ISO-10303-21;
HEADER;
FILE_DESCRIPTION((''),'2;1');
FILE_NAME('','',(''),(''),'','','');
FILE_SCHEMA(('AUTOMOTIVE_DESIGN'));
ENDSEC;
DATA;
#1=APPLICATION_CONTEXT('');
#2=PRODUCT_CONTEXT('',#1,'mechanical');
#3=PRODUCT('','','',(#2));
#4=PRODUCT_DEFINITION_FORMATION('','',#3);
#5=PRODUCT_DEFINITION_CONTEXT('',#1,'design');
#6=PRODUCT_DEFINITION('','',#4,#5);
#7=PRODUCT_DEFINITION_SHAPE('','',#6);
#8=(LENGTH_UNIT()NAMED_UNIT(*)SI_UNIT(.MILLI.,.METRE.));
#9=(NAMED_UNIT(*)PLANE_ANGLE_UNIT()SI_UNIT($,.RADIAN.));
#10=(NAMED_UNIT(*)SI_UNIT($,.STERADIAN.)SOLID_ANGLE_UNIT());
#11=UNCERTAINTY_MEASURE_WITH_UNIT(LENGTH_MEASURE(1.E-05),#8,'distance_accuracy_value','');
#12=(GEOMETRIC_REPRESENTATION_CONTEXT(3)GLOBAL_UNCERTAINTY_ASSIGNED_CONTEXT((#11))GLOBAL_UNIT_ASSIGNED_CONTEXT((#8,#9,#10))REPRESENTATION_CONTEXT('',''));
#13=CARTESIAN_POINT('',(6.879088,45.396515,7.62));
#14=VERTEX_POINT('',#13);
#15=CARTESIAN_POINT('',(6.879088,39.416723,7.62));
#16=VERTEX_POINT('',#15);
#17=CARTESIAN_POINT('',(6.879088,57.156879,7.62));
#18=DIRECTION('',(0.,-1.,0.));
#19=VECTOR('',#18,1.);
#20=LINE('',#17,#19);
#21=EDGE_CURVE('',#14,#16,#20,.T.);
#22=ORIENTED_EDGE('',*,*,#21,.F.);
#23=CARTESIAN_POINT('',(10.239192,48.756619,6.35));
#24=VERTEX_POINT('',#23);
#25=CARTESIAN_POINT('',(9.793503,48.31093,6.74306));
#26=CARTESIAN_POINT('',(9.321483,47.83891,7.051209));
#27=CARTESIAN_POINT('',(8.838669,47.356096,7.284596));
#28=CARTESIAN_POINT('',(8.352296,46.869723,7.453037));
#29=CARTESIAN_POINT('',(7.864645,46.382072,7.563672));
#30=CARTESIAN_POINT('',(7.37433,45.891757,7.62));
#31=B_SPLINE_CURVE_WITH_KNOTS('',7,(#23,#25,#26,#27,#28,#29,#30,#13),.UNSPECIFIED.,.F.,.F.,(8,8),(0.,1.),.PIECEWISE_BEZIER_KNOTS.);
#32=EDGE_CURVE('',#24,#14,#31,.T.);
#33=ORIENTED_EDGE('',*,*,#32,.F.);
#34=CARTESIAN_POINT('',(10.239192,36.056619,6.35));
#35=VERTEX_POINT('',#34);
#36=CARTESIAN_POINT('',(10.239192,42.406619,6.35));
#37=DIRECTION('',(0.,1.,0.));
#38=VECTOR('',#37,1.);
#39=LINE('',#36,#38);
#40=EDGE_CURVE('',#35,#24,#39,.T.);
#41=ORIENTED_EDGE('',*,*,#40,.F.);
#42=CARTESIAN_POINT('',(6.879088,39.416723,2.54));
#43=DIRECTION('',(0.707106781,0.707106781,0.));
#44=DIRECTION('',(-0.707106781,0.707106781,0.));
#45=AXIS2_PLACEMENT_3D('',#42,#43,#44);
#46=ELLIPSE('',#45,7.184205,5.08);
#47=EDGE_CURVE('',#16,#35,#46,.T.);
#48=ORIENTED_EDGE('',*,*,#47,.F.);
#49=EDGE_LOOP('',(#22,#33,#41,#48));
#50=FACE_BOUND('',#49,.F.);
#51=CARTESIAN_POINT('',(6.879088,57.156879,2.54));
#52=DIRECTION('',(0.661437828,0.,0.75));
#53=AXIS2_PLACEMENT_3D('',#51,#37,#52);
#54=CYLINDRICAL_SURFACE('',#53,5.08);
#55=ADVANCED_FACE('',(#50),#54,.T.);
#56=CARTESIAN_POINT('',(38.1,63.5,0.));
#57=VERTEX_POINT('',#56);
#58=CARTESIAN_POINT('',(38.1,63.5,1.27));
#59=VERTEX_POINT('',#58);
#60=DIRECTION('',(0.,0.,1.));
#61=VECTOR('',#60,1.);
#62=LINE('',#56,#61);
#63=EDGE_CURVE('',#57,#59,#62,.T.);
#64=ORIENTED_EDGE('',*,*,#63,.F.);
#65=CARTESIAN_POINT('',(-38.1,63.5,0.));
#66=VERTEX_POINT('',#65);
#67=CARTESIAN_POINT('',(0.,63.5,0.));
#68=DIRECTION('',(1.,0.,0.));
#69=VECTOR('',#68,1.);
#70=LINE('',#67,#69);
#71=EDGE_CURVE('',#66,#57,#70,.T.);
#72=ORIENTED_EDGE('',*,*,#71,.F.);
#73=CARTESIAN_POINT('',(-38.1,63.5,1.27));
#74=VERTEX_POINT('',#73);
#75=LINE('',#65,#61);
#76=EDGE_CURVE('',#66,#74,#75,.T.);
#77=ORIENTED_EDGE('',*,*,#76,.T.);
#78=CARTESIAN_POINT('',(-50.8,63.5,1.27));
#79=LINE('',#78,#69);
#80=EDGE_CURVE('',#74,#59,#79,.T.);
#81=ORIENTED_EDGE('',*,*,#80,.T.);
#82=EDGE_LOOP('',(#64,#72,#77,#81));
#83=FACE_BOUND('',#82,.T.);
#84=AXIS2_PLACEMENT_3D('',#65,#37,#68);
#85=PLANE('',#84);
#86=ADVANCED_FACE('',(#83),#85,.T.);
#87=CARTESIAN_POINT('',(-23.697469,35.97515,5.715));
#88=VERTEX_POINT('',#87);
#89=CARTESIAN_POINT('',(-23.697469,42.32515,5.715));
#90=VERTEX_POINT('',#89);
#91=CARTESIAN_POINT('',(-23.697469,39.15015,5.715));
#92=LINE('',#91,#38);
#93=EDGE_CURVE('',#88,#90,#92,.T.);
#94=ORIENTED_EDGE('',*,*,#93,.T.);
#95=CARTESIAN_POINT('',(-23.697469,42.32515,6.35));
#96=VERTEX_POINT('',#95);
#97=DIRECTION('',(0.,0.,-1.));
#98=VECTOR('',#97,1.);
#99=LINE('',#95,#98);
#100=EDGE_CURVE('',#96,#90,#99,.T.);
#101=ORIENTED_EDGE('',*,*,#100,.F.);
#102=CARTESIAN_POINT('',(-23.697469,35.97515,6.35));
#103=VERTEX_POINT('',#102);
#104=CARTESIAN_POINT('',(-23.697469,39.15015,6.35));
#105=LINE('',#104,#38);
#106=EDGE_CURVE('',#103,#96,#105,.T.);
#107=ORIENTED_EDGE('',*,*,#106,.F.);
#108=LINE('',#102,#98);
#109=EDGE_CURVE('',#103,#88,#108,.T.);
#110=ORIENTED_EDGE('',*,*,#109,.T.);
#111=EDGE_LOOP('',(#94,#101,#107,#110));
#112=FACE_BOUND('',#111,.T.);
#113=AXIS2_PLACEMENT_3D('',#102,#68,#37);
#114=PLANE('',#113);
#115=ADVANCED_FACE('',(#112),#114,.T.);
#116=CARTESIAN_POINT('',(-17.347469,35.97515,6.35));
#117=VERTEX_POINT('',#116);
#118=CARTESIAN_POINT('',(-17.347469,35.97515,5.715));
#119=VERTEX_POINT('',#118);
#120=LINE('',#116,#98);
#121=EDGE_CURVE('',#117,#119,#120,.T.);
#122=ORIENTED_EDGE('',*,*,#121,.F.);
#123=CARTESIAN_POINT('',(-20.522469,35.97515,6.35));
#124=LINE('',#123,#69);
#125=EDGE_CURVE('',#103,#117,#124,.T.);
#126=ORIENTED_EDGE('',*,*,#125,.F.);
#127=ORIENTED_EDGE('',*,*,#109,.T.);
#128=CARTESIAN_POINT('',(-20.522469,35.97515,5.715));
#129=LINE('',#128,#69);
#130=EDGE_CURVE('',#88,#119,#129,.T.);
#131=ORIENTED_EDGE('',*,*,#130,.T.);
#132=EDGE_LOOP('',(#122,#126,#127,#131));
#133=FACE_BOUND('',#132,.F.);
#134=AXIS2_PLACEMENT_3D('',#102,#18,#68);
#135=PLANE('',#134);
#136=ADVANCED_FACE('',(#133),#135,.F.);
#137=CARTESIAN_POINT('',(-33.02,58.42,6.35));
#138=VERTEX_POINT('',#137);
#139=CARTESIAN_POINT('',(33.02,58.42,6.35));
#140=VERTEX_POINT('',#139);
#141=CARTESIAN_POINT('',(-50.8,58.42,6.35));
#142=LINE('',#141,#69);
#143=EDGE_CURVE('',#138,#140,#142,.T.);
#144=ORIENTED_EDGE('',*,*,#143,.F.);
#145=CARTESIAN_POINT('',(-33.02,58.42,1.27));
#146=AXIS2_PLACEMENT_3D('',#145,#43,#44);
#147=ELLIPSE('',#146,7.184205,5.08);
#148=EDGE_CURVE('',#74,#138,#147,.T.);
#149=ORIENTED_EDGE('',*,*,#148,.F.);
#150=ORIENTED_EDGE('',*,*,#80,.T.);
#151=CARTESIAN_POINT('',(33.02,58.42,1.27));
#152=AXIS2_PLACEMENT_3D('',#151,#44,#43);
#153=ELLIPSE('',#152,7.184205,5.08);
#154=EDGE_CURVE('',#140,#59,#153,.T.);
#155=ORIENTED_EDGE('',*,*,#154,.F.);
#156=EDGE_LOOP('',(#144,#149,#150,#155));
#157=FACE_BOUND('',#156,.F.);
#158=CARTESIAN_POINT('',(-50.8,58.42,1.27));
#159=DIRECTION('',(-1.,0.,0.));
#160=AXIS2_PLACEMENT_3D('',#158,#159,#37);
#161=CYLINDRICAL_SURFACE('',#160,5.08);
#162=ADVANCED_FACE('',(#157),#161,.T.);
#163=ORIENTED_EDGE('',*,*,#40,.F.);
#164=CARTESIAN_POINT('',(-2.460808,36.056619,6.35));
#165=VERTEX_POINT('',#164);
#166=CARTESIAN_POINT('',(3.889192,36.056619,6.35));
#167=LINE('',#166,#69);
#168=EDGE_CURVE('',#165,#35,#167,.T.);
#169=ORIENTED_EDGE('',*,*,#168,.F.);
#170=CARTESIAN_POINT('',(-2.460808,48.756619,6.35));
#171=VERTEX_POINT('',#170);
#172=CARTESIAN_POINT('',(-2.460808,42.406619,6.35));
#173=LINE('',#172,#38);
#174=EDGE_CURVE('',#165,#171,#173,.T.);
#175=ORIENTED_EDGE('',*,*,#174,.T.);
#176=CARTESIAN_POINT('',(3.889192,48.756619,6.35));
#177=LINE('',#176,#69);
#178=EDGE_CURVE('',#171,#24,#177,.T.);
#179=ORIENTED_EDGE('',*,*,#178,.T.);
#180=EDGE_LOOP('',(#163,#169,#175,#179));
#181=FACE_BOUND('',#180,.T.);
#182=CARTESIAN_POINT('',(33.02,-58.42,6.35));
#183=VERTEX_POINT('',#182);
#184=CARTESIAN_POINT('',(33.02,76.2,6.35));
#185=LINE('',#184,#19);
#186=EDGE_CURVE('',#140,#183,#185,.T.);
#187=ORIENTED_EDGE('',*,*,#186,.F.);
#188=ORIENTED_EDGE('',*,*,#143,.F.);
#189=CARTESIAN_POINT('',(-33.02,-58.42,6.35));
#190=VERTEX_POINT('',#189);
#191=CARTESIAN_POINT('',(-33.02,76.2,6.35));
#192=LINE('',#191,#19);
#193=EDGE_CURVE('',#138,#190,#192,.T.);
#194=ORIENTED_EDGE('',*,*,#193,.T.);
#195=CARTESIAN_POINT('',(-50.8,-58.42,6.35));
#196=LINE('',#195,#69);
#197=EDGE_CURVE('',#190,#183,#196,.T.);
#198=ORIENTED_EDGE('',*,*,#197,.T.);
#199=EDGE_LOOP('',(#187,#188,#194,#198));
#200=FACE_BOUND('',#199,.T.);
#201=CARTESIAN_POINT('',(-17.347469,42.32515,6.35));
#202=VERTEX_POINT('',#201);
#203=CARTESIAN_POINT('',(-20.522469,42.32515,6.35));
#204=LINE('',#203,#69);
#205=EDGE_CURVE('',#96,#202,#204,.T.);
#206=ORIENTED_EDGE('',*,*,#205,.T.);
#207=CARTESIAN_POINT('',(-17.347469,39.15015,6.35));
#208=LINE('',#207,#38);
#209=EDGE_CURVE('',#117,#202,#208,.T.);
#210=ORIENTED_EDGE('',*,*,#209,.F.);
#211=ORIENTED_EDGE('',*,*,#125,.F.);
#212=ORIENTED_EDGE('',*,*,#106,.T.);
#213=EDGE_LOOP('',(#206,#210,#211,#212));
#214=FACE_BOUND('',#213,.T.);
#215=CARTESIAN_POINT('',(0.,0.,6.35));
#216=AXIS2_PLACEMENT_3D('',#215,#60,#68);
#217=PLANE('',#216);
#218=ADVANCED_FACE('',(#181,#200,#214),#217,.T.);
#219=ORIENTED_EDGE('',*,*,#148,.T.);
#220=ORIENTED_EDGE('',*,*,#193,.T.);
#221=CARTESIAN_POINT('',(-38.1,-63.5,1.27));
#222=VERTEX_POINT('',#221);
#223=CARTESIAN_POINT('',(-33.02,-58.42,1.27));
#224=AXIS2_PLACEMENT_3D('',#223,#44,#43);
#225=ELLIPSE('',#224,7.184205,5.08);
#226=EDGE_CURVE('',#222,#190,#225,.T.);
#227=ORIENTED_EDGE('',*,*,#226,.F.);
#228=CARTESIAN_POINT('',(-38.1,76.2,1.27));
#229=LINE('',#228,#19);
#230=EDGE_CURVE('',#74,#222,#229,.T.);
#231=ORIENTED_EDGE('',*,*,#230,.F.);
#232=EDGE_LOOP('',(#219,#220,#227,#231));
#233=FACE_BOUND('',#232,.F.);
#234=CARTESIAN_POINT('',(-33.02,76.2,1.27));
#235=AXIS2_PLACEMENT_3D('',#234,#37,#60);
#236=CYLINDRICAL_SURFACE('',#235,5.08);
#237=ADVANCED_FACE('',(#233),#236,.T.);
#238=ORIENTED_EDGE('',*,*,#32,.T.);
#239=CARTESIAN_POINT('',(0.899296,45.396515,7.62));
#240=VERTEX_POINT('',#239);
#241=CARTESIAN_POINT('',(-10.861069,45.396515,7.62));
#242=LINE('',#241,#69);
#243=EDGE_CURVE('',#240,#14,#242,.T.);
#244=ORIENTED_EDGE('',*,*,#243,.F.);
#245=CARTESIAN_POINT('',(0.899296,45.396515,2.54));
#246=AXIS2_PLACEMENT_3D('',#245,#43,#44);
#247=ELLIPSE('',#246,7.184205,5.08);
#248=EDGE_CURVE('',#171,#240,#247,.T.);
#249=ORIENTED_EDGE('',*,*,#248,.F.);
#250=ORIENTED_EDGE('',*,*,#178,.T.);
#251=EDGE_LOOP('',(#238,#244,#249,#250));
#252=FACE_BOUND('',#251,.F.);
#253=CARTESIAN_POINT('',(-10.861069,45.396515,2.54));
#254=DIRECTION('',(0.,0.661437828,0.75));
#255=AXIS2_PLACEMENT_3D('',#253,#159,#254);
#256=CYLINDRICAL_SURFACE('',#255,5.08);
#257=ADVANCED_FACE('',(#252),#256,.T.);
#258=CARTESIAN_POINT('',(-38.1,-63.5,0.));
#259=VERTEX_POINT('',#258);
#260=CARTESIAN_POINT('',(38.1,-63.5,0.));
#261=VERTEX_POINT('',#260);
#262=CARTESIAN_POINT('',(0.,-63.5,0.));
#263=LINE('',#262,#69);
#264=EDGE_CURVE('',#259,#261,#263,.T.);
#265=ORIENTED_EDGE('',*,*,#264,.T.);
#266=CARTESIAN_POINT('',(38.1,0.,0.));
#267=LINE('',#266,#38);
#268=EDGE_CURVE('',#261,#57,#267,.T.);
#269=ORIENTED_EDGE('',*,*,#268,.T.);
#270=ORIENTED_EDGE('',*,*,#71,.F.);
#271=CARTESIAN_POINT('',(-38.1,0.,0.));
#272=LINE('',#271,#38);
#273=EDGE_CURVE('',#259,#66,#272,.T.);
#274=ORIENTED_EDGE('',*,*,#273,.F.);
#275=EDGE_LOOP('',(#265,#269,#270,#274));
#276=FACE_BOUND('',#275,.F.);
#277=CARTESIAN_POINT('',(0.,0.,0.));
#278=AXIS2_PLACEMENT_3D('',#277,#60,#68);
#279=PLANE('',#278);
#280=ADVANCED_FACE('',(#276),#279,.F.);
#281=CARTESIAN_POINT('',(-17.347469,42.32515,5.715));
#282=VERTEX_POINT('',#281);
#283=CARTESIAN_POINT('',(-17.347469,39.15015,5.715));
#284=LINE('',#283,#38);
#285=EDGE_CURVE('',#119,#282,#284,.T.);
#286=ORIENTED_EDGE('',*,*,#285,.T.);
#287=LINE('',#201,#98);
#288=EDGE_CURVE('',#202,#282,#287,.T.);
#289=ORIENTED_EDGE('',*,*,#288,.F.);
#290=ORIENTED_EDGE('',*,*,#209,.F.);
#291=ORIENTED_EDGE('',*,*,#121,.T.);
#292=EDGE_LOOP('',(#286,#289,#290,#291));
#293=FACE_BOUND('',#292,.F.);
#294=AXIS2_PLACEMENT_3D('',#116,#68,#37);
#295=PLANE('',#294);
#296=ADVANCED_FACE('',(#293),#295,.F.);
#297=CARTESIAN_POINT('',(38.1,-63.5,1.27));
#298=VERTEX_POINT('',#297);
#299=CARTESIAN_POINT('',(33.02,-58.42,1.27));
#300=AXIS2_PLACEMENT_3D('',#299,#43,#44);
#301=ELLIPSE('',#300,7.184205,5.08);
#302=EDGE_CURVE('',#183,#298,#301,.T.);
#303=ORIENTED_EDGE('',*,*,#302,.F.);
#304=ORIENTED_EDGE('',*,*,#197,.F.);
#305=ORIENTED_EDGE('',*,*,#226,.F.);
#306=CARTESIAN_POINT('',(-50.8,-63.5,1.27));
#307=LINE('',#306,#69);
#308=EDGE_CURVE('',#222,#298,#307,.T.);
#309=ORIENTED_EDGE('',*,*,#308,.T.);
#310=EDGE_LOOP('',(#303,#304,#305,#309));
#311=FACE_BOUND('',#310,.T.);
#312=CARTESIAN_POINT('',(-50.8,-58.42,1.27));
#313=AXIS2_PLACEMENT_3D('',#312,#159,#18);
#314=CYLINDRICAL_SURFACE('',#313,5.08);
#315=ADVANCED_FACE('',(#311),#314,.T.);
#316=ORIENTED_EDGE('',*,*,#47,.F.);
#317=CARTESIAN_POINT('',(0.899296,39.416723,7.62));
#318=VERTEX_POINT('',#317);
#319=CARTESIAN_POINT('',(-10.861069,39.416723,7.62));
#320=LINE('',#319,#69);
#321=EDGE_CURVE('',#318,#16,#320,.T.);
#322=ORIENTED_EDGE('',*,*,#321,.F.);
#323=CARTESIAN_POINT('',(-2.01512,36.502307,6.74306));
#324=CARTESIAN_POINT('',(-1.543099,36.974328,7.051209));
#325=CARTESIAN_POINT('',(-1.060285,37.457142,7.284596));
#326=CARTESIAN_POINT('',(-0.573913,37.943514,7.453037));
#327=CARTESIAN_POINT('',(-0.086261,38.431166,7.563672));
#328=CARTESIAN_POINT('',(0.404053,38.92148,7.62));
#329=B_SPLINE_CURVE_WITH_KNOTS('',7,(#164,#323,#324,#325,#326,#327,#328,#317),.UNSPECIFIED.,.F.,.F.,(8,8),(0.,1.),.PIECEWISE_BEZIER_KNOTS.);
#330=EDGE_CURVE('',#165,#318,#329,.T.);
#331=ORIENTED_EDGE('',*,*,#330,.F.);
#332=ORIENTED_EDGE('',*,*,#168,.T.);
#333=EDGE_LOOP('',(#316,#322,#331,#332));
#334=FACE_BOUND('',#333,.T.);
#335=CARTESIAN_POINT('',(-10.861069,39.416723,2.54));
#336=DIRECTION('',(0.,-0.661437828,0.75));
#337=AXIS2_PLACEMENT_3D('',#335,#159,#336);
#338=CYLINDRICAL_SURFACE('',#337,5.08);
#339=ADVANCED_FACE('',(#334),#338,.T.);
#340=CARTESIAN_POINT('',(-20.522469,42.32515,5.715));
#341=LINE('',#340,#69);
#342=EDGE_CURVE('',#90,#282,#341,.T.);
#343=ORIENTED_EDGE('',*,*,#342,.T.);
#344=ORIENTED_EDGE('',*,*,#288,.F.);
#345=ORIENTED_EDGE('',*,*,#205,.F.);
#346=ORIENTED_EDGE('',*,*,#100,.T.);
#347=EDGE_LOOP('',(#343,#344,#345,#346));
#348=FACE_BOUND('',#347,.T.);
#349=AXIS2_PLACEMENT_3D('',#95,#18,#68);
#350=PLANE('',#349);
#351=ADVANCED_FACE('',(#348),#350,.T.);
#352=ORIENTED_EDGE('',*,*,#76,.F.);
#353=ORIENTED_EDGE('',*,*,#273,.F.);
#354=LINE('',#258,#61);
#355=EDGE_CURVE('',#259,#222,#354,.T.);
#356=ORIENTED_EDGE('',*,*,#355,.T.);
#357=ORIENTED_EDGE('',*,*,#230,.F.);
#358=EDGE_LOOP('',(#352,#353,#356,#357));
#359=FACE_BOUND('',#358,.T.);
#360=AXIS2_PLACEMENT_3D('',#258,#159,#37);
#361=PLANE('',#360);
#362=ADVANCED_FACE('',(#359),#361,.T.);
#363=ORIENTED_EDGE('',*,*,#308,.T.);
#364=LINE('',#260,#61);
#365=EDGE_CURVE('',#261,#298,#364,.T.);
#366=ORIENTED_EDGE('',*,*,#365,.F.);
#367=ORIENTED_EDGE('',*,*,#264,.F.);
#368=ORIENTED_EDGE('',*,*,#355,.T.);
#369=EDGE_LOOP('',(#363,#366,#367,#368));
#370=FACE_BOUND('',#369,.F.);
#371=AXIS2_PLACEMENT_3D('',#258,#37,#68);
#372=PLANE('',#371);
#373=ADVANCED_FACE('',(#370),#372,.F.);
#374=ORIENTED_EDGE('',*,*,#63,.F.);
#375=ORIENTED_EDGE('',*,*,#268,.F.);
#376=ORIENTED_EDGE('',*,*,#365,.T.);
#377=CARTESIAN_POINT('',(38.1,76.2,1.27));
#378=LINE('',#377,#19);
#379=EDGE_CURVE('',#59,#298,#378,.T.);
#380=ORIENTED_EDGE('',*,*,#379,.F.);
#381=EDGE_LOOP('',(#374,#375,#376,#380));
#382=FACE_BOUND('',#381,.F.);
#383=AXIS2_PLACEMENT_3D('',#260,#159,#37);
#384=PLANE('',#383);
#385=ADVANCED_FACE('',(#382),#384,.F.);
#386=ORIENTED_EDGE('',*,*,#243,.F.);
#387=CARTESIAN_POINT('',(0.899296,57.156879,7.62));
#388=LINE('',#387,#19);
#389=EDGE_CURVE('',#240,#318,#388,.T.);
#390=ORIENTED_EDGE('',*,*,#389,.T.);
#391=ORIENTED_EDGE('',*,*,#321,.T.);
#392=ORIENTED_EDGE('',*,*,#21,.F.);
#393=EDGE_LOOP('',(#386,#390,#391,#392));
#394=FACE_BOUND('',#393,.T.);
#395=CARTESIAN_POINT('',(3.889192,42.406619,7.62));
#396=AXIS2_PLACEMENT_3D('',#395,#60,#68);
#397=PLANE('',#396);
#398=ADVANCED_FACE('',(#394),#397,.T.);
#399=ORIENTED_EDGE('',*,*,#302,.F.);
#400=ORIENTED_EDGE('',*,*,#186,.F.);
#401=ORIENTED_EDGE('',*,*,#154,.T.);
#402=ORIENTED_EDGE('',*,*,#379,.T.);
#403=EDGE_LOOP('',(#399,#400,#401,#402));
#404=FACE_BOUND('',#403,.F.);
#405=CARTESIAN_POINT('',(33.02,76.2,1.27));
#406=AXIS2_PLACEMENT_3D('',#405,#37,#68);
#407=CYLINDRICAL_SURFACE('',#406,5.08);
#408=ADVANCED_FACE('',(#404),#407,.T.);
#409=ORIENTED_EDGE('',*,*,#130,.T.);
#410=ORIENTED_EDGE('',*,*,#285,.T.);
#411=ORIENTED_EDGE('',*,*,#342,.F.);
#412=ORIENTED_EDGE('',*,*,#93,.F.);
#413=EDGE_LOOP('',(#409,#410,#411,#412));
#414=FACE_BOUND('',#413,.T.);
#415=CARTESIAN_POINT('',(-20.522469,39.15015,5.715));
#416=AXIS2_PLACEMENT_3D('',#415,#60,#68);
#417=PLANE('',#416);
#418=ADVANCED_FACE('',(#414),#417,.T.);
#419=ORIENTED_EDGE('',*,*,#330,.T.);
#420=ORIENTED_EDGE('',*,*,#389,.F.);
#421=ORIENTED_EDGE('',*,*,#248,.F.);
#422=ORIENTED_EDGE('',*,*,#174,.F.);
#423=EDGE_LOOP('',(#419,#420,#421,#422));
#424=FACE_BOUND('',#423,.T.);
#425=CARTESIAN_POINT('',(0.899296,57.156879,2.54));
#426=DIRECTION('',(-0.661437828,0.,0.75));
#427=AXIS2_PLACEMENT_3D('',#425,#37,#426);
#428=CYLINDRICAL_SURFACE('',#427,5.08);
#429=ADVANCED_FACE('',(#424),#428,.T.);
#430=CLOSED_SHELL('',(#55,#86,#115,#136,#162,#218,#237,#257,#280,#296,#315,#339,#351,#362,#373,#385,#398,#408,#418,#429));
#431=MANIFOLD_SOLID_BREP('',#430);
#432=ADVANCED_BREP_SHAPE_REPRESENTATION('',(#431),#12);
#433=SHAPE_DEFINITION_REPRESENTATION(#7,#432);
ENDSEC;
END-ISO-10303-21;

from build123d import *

# Parameters (mm, degrees)
F0_W        = 76.2
F0_H        = 127
F1_DEPTH    = 6.35
F2_W        = 12.7
F2_H        = 12.7
F3_DEPTH    = 1.27
F4_W        = 6.35
F4_H        = 6.35
F5_DEPTH    = 0.635
F6_T1_DEPTH = 29.5005208253
F6_T3_DEPTH = 29.5005208253
F6_T5_DEPTH = 152.4
F6_T7_DEPTH = 101.6


# Not quite as in the source:
# - a fillet or chamfer that OpenCascade refuses, or shapes differently, is made with other operations: its cross-section is extruded or revolved along the edge and cut away or added


with BuildPart() as f1:
    # F0 (on Top) → F1 (new body)
    with BuildSketch(Plane.XY):
        Rectangle(F0_W, F0_H)
    extrude(amount=F1_DEPTH)

    # F2 (on face) → F3 (join)
    with BuildSketch(Plane.XY.offset(6.35)):
        with Locations((3.8891917182, 42.4066188663)):
            Rectangle(F2_W, F2_H)
    extrude(amount=F3_DEPTH)

    # F4 (on face) → F5 (cut)
    with BuildSketch(Plane.XY.offset(6.35)):
        with Locations((-20.5224687852, 39.1501502216)):
            Rectangle(F4_W, F4_H)
    extrude(amount=-F5_DEPTH, mode=Mode.SUBTRACT)

    # F6: fillet of radius 5.08 on 8 edges, made by hand

    # F6_s2 → F6_t1 (cut)
    with BuildSketch(Plane.XZ.offset(-57.156879279)):
        with BuildLine():
            ThreePointArc((10.2391917182, 6.35), (8.6751387773, 7.2919048812), (6.8790875531, 7.62))
            Line((6.8790875531, 7.62), (10.2391917182, 7.62))
            Line((10.2391917182, 7.62), (10.2391917182, 6.35))
        make_face()
        with BuildLine():
            ThreePointArc((-2.4608082818, 6.35), (-0.896755341, 7.2919048812), (0.8992958832, 7.62))
            Line((0.8992958832, 7.62), (-2.4608082818, 7.62))
            Line((-2.4608082818, 7.62), (-2.4608082818, 6.35))
        make_face()
    extrude(amount=F6_T1_DEPTH, mode=Mode.SUBTRACT)

    # F6_s4 → F6_t3 (cut)
    with BuildSketch(Plane.YZ.offset(-10.8610686945)):
        with BuildLine():
            ThreePointArc((48.7566188663, 6.35), (47.1925659255, 7.2919048812), (45.3965147013, 7.62))
            Line((45.3965147013, 7.62), (48.7566188663, 7.62))
            Line((48.7566188663, 7.62), (48.7566188663, 6.35))
        make_face()
        with BuildLine():
            ThreePointArc((36.0566188663, 6.35), (37.6206718072, 7.2919048812), (39.4167230314, 7.62))
            Line((39.4167230314, 7.62), (36.0566188663, 7.62))
            Line((36.0566188663, 7.62), (36.0566188663, 6.35))
        make_face()
    extrude(amount=F6_T3_DEPTH, mode=Mode.SUBTRACT)

    # F6_s6 → F6_t5 (cut)
    with BuildSketch(Plane.XZ.offset(-76.2)):
        with BuildLine():
            ThreePointArc((38.1, 1.27), (36.6121024484, 4.8621024484), (33.02, 6.35))
            Line((33.02, 6.35), (38.1, 6.35))
            Line((38.1, 6.35), (38.1, 1.27))
        make_face()
        with BuildLine():
            ThreePointArc((-33.02, 6.35), (-36.6121024484, 4.8621024484), (-38.1, 1.27))
            Line((-38.1, 1.27), (-38.1, 6.35))
            Line((-38.1, 6.35), (-33.02, 6.35))
        make_face()
    extrude(amount=F6_T5_DEPTH, mode=Mode.SUBTRACT)

    # F6_s8 → F6_t7 (cut)
    with BuildSketch(Plane.YZ.offset(-50.8)):
        with BuildLine():
            ThreePointArc((-63.5, 1.27), (-62.0121024484, 4.8621024484), (-58.42, 6.35))
            Line((-58.42, 6.35), (-63.5, 6.35))
            Line((-63.5, 6.35), (-63.5, 1.27))
        make_face()
        with BuildLine():
            ThreePointArc((63.5, 1.27), (62.0121024484, 4.8621024484), (58.42, 6.35))
            Line((58.42, 6.35), (63.5, 6.35))
            Line((63.5, 6.35), (63.5, 1.27))
        make_face()
    extrude(amount=F6_T7_DEPTH, mode=Mode.SUBTRACT)


solid = f1.part
